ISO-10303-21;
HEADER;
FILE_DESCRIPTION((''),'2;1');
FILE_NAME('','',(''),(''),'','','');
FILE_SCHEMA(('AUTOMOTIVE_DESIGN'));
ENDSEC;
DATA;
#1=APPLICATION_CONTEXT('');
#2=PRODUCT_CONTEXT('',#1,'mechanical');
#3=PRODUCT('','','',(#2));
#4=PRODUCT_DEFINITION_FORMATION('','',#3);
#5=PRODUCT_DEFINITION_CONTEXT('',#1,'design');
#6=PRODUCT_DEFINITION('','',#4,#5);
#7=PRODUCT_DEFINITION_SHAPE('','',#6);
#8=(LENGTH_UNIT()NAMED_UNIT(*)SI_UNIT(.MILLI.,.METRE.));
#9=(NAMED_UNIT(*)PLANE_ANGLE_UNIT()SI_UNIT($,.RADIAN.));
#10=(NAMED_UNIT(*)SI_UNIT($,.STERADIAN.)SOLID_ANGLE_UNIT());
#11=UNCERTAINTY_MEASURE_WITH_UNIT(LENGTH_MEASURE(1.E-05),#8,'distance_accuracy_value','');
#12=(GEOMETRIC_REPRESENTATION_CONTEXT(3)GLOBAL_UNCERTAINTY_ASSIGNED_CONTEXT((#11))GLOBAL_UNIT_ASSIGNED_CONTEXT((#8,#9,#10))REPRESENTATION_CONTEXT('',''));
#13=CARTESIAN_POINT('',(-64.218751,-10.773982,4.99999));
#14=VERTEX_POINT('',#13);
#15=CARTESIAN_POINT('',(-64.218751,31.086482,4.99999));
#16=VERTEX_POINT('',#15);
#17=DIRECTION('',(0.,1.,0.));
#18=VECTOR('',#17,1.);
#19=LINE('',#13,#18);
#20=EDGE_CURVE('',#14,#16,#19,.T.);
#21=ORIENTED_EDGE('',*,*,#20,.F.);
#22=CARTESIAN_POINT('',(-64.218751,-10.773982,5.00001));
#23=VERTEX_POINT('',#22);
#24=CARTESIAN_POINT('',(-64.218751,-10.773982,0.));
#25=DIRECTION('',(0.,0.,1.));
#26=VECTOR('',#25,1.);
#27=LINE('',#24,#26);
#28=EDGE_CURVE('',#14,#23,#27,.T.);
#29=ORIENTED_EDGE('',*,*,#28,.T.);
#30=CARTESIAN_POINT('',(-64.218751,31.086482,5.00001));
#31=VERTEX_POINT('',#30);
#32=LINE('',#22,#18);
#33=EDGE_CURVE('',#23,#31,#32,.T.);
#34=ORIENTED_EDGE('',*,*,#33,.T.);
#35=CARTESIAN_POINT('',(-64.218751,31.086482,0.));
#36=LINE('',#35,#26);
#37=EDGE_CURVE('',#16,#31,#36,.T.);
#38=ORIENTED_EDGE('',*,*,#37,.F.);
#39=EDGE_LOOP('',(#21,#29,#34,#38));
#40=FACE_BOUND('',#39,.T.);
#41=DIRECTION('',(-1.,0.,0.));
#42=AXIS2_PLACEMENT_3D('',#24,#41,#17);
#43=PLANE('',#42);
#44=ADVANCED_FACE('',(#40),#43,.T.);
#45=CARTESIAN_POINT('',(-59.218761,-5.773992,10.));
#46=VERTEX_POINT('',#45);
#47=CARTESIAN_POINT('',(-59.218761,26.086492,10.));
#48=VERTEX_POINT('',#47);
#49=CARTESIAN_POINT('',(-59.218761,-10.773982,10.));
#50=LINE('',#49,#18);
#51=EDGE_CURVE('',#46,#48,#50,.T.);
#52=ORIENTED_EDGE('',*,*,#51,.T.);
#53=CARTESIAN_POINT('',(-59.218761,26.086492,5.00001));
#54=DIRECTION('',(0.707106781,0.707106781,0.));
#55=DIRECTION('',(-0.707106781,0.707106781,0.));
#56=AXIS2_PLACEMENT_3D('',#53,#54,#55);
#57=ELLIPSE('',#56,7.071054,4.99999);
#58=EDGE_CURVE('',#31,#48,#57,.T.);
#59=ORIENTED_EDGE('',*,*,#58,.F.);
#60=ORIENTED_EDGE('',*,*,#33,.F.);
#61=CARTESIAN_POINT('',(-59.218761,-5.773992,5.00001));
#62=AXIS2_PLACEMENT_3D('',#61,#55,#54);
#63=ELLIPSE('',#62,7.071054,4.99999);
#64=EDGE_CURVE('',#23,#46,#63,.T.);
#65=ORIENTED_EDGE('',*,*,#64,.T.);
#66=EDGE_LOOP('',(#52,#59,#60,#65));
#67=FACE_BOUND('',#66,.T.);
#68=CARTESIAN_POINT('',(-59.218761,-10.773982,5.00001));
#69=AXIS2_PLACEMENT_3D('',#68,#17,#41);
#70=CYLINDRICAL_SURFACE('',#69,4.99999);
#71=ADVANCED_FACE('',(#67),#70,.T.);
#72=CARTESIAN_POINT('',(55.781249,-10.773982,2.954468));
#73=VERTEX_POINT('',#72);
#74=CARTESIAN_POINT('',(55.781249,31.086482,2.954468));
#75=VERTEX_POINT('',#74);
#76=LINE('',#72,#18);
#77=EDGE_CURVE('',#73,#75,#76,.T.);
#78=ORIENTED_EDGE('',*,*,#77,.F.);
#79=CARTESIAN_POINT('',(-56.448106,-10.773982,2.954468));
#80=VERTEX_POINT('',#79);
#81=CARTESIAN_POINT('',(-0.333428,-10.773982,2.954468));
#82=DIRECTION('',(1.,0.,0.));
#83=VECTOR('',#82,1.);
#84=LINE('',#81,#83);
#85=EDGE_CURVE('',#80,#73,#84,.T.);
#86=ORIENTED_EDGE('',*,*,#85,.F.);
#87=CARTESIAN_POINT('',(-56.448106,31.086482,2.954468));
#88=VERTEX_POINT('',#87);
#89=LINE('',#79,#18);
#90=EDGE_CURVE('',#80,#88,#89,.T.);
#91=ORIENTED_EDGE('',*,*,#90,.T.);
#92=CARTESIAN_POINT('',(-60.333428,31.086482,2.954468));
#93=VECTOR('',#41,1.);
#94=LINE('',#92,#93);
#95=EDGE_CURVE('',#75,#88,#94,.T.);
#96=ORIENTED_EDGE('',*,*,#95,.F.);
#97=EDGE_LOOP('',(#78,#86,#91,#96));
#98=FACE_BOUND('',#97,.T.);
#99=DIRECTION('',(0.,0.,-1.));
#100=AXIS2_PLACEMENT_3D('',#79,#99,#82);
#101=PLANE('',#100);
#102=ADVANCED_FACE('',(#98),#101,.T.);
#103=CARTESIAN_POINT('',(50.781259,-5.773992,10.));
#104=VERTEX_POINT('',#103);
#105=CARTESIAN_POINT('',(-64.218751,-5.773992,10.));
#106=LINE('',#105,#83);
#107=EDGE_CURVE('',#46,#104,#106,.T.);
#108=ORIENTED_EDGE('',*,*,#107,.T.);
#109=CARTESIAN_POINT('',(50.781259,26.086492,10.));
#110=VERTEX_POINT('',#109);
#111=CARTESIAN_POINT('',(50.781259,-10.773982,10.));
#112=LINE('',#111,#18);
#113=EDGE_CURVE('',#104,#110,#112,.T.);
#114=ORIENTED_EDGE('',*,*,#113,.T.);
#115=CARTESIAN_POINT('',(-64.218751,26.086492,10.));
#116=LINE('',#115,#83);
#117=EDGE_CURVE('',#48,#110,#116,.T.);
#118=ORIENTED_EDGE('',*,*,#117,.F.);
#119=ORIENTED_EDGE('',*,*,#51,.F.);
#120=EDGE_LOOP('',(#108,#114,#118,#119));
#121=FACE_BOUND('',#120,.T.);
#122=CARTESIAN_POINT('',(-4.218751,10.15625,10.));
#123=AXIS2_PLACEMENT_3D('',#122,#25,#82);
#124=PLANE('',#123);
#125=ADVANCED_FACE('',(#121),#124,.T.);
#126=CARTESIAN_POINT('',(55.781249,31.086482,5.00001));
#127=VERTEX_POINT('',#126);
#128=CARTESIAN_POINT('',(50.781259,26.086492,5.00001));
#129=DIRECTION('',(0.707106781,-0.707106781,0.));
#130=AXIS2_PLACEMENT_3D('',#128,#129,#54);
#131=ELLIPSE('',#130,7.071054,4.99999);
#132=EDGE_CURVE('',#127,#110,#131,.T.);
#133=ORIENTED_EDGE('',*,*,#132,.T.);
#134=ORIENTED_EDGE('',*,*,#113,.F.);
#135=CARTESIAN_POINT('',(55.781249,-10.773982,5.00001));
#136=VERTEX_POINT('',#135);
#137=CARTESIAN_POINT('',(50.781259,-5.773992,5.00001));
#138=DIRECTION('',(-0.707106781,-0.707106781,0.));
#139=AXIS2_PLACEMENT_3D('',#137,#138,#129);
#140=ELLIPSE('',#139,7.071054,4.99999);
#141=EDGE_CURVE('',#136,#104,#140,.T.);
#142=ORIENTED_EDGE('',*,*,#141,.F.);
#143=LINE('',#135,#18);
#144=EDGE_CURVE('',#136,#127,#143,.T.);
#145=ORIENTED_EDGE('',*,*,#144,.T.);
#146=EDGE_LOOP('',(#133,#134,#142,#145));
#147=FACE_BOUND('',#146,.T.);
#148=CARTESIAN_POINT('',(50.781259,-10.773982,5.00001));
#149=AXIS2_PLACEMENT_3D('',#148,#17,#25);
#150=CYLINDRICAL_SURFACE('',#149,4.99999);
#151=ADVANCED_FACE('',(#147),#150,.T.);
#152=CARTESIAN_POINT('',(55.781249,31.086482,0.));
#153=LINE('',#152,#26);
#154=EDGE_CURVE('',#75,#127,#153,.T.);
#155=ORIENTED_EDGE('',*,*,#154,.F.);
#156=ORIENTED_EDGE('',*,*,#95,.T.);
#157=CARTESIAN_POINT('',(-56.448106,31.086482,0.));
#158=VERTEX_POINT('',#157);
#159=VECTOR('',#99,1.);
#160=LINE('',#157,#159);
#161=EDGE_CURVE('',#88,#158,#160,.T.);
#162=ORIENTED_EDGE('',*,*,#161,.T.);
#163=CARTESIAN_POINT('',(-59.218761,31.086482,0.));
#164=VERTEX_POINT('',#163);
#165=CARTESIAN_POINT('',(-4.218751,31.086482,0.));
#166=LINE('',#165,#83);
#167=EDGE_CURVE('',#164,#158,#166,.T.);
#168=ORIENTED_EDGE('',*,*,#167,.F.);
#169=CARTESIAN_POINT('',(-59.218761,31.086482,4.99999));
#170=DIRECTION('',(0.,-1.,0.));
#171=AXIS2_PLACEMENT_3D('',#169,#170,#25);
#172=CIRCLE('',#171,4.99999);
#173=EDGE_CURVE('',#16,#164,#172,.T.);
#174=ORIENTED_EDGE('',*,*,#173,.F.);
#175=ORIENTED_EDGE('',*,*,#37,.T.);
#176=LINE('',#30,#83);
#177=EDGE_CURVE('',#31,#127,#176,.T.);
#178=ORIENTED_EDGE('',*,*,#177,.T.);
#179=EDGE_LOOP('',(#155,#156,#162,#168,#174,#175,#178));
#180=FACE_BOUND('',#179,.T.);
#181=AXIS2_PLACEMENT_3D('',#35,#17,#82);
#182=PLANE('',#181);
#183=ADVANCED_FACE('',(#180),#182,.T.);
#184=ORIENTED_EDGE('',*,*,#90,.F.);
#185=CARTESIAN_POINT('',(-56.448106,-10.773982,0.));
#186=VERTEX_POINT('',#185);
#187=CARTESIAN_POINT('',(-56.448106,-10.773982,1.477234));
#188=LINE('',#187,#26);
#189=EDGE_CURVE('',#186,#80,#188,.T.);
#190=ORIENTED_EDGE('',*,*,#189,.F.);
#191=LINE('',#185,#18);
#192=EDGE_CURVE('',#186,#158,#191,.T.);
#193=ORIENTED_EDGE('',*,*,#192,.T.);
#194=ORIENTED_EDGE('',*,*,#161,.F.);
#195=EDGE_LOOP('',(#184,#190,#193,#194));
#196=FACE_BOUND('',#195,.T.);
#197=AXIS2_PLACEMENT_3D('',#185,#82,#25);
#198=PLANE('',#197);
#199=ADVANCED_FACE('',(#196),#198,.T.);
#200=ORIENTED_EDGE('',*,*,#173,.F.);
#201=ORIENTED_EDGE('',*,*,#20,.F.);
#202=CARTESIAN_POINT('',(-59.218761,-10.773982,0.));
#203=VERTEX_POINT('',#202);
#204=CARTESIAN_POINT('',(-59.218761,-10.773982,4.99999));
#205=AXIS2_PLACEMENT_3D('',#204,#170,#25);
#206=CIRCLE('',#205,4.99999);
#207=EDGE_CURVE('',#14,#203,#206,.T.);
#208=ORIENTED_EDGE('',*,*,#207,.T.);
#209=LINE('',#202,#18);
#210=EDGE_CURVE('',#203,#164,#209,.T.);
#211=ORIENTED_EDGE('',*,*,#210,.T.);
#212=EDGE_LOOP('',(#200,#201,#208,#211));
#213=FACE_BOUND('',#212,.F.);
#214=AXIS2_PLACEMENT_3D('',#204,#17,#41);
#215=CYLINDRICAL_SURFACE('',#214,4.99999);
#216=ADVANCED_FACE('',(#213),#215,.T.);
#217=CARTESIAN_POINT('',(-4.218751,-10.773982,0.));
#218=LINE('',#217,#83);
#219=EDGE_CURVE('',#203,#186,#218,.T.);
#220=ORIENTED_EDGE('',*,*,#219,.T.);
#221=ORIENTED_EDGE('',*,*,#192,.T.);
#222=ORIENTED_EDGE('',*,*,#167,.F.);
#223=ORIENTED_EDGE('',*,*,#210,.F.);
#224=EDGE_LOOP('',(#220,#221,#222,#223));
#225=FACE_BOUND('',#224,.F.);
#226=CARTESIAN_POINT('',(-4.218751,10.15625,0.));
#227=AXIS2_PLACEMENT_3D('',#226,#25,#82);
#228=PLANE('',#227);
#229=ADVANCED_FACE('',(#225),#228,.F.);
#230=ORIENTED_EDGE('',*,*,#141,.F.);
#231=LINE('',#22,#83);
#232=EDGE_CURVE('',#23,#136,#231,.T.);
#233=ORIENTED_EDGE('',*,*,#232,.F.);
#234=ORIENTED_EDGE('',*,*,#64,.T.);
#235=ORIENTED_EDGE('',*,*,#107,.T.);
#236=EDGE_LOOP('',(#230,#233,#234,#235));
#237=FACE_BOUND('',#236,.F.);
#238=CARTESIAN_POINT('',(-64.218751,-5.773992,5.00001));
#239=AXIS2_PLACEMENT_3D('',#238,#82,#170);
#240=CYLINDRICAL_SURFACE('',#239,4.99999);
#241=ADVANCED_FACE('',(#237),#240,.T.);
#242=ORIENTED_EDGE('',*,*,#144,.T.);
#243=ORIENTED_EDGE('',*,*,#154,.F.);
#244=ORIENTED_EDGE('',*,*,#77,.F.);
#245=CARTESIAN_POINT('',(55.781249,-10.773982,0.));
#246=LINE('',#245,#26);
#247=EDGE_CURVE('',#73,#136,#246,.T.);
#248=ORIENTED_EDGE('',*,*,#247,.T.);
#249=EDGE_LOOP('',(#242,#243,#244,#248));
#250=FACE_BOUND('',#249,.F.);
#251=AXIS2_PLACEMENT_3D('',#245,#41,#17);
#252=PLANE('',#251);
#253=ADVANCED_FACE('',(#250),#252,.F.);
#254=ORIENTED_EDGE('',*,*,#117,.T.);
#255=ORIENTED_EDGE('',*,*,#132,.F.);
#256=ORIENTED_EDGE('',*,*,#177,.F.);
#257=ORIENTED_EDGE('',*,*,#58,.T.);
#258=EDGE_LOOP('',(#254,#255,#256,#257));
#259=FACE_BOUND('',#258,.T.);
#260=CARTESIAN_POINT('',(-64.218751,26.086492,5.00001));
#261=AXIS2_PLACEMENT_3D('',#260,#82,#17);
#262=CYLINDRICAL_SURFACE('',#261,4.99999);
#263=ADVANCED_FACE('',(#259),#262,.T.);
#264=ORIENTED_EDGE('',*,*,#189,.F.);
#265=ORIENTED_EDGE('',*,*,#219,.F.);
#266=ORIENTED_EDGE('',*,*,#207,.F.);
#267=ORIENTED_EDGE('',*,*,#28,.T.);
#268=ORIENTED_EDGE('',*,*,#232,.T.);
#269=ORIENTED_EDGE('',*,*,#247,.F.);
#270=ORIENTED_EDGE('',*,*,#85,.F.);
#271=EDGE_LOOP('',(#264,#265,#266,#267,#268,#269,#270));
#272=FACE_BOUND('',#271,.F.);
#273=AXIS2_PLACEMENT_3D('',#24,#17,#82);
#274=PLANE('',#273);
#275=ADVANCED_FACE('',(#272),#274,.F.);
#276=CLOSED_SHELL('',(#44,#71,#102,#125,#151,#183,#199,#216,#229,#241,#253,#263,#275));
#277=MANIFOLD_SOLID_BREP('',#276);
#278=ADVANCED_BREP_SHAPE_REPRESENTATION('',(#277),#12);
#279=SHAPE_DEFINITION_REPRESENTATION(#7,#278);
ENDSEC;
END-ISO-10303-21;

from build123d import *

# Parameters (mm, degrees)
F0_W     = 120
F0_H     = 41.8604637527
F1_DEPTH = 10
F2_W     = 112.2293550894
F2_H     = 2.9544678982
F3_DEPTH = 73.9
F4_R     = 4.99999


# Not quite as in the source:
# - a fillet or chamfer is up to 0.001 mm smaller than in the source, because OpenCascade refuses the exact size


with BuildPart() as f1:
    # F0 (on Top) → F1 (new body)
    with BuildSketch(Plane.XY):
        with Locations((-4.2187506333, 10.1562498603)):
            Rectangle(F0_W, F0_H)
    extrude(amount=F1_DEPTH)

    # F2 (on face) → F3 (cut)
    with BuildSketch(Plane.XZ.offset(10.773982016)):
        with Locations((-0.333428178, 1.4772339491)):
            Rectangle(F2_W, F2_H)
    extrude(amount=-F3_DEPTH, mode=Mode.SUBTRACT)

    # F4 (radius 5 in the source; OpenCascade refuses exactly that, so slightly less here)
    f4_edges = [f1.edges().sort_by_distance(p)[0] for p in [
        (-64.218751, 10.15625, 10),
        (-4.218751, 31.086482, 10),
        (-4.218751, -10.773982, 10),
        (55.781249, 10.15625, 10),
        (-64.218751, 10.15625, 0),
    ]]
    fillet(f4_edges, radius=F4_R)


solid = f1.part
